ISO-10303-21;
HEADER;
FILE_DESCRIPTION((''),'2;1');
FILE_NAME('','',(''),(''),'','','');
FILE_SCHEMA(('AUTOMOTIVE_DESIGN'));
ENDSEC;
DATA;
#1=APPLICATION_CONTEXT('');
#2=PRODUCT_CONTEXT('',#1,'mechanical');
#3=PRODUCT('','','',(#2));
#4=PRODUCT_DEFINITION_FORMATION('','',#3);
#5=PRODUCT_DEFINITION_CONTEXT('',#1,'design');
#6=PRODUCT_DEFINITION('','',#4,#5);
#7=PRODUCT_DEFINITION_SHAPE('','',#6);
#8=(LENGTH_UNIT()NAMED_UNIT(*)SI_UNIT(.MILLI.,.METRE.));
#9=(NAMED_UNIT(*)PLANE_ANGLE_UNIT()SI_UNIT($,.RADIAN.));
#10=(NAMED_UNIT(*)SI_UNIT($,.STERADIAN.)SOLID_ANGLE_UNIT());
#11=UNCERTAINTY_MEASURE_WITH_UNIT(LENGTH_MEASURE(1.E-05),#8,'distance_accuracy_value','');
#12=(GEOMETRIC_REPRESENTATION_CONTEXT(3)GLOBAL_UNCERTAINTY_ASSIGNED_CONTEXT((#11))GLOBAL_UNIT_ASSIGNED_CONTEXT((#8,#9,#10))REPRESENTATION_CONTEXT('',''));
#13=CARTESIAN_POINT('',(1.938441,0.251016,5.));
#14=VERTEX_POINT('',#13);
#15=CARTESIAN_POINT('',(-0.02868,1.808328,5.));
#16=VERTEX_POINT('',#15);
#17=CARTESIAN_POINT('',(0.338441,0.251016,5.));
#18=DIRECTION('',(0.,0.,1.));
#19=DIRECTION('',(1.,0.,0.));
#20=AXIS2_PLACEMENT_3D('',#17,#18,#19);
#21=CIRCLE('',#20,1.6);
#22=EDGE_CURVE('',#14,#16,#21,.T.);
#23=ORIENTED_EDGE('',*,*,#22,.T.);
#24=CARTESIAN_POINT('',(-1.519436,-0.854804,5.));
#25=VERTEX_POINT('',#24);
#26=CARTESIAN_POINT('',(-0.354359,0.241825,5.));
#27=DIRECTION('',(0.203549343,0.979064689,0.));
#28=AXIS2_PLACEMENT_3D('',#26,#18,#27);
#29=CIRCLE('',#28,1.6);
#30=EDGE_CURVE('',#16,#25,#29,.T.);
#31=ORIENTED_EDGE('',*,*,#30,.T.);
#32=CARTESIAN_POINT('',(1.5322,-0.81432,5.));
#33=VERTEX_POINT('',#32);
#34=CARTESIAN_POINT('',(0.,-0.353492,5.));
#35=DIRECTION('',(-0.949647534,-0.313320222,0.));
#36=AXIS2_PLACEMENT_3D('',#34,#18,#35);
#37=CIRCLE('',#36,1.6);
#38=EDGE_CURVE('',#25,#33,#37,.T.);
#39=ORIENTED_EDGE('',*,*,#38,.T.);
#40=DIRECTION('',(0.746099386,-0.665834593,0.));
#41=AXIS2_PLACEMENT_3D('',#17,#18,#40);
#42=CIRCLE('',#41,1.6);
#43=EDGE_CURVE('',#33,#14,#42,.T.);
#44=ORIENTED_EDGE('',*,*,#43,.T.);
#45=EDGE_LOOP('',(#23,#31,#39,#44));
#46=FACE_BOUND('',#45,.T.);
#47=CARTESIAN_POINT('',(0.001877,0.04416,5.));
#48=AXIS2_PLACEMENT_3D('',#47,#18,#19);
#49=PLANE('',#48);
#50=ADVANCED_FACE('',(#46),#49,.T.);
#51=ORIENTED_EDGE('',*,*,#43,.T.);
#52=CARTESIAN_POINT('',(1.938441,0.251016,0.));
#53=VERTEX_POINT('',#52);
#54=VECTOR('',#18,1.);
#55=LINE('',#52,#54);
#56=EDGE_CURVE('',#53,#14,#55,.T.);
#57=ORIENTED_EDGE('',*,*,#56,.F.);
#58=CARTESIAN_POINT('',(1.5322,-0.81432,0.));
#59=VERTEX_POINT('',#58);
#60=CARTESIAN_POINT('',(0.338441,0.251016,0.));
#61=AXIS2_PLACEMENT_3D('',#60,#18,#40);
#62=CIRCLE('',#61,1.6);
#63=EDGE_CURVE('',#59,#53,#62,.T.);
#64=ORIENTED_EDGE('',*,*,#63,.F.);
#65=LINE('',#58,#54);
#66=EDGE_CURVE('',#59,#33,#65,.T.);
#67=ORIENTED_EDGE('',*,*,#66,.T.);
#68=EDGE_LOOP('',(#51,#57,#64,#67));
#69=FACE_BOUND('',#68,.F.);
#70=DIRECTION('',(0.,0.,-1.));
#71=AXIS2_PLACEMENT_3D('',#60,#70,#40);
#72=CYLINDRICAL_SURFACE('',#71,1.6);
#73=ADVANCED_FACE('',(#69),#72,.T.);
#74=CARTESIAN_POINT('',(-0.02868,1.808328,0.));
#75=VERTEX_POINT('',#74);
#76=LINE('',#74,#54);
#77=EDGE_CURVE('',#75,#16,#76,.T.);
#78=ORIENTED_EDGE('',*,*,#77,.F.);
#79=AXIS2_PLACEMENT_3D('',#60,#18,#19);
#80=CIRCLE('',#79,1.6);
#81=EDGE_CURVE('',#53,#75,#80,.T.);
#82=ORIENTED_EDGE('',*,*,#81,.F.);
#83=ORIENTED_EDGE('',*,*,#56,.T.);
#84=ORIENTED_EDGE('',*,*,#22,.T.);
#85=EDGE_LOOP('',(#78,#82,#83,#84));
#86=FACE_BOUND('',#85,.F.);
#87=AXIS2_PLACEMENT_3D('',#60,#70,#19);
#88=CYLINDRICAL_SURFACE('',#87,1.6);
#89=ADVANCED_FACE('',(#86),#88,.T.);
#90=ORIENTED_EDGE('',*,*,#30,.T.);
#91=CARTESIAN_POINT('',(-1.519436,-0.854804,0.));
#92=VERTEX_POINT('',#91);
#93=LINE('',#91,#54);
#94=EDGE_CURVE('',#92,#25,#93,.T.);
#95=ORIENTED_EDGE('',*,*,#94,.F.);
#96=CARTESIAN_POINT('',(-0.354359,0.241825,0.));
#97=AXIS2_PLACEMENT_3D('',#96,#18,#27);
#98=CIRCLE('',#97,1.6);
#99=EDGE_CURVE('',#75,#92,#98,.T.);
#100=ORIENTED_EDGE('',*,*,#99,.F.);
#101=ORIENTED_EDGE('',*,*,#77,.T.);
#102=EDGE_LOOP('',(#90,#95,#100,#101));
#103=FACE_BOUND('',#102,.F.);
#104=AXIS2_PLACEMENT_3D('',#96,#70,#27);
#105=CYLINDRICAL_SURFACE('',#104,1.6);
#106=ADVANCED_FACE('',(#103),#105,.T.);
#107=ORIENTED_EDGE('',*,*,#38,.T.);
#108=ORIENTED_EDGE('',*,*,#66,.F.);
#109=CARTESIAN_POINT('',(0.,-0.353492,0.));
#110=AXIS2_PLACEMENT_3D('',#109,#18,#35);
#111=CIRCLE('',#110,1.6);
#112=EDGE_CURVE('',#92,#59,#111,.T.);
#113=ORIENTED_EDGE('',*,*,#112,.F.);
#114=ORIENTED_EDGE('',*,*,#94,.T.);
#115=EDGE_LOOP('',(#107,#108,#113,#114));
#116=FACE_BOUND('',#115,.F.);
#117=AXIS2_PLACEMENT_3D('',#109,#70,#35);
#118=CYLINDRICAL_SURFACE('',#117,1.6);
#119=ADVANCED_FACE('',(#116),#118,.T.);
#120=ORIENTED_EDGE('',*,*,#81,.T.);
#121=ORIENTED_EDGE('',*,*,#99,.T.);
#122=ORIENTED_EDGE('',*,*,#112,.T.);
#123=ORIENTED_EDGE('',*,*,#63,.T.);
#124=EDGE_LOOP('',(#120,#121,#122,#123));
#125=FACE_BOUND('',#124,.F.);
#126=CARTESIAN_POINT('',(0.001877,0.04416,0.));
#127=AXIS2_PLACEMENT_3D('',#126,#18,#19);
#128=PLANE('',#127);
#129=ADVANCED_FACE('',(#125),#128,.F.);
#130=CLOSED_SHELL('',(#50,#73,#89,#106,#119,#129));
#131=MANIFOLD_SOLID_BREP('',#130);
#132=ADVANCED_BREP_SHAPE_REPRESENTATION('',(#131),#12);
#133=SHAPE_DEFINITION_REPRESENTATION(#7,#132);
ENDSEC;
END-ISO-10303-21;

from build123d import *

# Parameters (mm, degrees)
F1_DEPTH = 5


with BuildPart() as f1:
    # F0 (on Top) → F1 (new body)
    with BuildSketch(Plane.XY):
        with BuildLine():
            ThreePointArc((0.0127623188, -1.3154877858), (0.9001120091, -0.7513032815), (1.2456412678, 0.2418246857))
            ThreePointArc((1.2456412678, 0.2418246857), (1.2253718915, 0.4956970091), (1.1650773221, 0.7431370404))
            ThreePointArc((1.1650773221, 0.7431370404), (-0.021224531, 1.2463674095), (-1.1937590183, 0.7118435401))
            ThreePointArc((-1.1937590183, 0.7118435401), (-1.0364939631, -0.5672465342), (0.0127623188, -1.3154877858))
        make_face()
        with BuildLine():
            ThreePointArc((1.1650773221, 0.7431370404), (1.2253718915, 0.4956970091), (1.2456412678, 0.2418246857))
            ThreePointArc((1.2456412678, 0.2418246857), (0.9001120091, -0.7513032815), (0.0127623188, -1.3154877858))
            ThreePointArc((0.0127623188, -1.3154877858), (0.8396230024, -1.2684634277), (1.5322002861, -0.8143196329))
            ThreePointArc((1.5322002861, -0.8143196329), (1.5829593264, -0.5863861437), (1.6, -0.3534918091))
            ThreePointArc((1.6, -0.3534918091), (1.4873001908, 0.2363710075), (1.1650773221, 0.7431370404))
        make_face()
        with BuildLine():
            ThreePointArc((-1.1937590183, 0.7118435401), (-0.021224531, 1.2463674095), (1.1650773221, 0.7431370404))
            ThreePointArc((1.1650773221, 0.7431370404), (0.7108972882, 1.4356544939), (-0.0286797832, 1.8083281878))
            ThreePointArc((-0.0286797832, 1.8083281878), (-0.7581101587, 1.4161659079), (-1.1937590183, 0.7118435401))
        make_face()
        with BuildLine():
            ThreePointArc((-0.0286797832, 1.8083281878), (0.7108972882, 1.4356544939), (1.1650773221, 0.7431370404))
            ThreePointArc((1.1650773221, 0.7431370404), (1.4873001908, 0.2363710075), (1.6, -0.3534918091))
            ThreePointArc((1.6, -0.3534918091), (1.5829593264, -0.5863861437), (1.5322002861, -0.8143196329))
            ThreePointArc((1.5322002861, -0.8143196329), (1.8334353195, -0.3190656686), (1.9384412678, 0.2510157163))
            ThreePointArc((1.9384412678, 0.2510157163), (1.331569235, 1.5054864576), (-0.0286797832, 1.8083281878))
        make_face()
        with BuildLine():
            ThreePointArc((1.5322002861, -0.8143196329), (0.8396230024, -1.2684634277), (0.0127623188, -1.3154877858))
            ThreePointArc((0.0127623188, -1.3154877858), (-0.8150548387, -1.2904152099), (-1.5194360543, -0.8548041638))
            ThreePointArc((-1.5194360543, -0.8548041638), (0.021224531, -1.9533510277), (1.5322002861, -0.8143196329))
        make_face()
        with BuildLine():
            ThreePointArc((-1.5194360543, -0.8548041638), (-0.8150548387, -1.2904152099), (0.0127623188, -1.3154877858))
            ThreePointArc((0.0127623188, -1.3154877858), (-1.0364939631, -0.5672465342), (-1.1937590183, 0.7118435401))
            ThreePointArc((-1.1937590183, 0.7118435401), (-1.5665098571, -0.0278434289), (-1.5194360543, -0.8548041638))
        make_face()
        with BuildLine():
            ThreePointArc((-1.1937590183, 0.7118435401), (-0.7581101587, 1.4161659079), (-0.0286797832, 1.8083281878))
            ThreePointArc((-0.0286797832, 1.8083281878), (-1.7505019511, 1.0233514685), (-1.5194360543, -0.8548041638))
            ThreePointArc((-1.5194360543, -0.8548041638), (-1.5665098571, -0.0278434289), (-1.1937590183, 0.7118435401))
        make_face()
    extrude(amount=F1_DEPTH)


solid = f1.part
